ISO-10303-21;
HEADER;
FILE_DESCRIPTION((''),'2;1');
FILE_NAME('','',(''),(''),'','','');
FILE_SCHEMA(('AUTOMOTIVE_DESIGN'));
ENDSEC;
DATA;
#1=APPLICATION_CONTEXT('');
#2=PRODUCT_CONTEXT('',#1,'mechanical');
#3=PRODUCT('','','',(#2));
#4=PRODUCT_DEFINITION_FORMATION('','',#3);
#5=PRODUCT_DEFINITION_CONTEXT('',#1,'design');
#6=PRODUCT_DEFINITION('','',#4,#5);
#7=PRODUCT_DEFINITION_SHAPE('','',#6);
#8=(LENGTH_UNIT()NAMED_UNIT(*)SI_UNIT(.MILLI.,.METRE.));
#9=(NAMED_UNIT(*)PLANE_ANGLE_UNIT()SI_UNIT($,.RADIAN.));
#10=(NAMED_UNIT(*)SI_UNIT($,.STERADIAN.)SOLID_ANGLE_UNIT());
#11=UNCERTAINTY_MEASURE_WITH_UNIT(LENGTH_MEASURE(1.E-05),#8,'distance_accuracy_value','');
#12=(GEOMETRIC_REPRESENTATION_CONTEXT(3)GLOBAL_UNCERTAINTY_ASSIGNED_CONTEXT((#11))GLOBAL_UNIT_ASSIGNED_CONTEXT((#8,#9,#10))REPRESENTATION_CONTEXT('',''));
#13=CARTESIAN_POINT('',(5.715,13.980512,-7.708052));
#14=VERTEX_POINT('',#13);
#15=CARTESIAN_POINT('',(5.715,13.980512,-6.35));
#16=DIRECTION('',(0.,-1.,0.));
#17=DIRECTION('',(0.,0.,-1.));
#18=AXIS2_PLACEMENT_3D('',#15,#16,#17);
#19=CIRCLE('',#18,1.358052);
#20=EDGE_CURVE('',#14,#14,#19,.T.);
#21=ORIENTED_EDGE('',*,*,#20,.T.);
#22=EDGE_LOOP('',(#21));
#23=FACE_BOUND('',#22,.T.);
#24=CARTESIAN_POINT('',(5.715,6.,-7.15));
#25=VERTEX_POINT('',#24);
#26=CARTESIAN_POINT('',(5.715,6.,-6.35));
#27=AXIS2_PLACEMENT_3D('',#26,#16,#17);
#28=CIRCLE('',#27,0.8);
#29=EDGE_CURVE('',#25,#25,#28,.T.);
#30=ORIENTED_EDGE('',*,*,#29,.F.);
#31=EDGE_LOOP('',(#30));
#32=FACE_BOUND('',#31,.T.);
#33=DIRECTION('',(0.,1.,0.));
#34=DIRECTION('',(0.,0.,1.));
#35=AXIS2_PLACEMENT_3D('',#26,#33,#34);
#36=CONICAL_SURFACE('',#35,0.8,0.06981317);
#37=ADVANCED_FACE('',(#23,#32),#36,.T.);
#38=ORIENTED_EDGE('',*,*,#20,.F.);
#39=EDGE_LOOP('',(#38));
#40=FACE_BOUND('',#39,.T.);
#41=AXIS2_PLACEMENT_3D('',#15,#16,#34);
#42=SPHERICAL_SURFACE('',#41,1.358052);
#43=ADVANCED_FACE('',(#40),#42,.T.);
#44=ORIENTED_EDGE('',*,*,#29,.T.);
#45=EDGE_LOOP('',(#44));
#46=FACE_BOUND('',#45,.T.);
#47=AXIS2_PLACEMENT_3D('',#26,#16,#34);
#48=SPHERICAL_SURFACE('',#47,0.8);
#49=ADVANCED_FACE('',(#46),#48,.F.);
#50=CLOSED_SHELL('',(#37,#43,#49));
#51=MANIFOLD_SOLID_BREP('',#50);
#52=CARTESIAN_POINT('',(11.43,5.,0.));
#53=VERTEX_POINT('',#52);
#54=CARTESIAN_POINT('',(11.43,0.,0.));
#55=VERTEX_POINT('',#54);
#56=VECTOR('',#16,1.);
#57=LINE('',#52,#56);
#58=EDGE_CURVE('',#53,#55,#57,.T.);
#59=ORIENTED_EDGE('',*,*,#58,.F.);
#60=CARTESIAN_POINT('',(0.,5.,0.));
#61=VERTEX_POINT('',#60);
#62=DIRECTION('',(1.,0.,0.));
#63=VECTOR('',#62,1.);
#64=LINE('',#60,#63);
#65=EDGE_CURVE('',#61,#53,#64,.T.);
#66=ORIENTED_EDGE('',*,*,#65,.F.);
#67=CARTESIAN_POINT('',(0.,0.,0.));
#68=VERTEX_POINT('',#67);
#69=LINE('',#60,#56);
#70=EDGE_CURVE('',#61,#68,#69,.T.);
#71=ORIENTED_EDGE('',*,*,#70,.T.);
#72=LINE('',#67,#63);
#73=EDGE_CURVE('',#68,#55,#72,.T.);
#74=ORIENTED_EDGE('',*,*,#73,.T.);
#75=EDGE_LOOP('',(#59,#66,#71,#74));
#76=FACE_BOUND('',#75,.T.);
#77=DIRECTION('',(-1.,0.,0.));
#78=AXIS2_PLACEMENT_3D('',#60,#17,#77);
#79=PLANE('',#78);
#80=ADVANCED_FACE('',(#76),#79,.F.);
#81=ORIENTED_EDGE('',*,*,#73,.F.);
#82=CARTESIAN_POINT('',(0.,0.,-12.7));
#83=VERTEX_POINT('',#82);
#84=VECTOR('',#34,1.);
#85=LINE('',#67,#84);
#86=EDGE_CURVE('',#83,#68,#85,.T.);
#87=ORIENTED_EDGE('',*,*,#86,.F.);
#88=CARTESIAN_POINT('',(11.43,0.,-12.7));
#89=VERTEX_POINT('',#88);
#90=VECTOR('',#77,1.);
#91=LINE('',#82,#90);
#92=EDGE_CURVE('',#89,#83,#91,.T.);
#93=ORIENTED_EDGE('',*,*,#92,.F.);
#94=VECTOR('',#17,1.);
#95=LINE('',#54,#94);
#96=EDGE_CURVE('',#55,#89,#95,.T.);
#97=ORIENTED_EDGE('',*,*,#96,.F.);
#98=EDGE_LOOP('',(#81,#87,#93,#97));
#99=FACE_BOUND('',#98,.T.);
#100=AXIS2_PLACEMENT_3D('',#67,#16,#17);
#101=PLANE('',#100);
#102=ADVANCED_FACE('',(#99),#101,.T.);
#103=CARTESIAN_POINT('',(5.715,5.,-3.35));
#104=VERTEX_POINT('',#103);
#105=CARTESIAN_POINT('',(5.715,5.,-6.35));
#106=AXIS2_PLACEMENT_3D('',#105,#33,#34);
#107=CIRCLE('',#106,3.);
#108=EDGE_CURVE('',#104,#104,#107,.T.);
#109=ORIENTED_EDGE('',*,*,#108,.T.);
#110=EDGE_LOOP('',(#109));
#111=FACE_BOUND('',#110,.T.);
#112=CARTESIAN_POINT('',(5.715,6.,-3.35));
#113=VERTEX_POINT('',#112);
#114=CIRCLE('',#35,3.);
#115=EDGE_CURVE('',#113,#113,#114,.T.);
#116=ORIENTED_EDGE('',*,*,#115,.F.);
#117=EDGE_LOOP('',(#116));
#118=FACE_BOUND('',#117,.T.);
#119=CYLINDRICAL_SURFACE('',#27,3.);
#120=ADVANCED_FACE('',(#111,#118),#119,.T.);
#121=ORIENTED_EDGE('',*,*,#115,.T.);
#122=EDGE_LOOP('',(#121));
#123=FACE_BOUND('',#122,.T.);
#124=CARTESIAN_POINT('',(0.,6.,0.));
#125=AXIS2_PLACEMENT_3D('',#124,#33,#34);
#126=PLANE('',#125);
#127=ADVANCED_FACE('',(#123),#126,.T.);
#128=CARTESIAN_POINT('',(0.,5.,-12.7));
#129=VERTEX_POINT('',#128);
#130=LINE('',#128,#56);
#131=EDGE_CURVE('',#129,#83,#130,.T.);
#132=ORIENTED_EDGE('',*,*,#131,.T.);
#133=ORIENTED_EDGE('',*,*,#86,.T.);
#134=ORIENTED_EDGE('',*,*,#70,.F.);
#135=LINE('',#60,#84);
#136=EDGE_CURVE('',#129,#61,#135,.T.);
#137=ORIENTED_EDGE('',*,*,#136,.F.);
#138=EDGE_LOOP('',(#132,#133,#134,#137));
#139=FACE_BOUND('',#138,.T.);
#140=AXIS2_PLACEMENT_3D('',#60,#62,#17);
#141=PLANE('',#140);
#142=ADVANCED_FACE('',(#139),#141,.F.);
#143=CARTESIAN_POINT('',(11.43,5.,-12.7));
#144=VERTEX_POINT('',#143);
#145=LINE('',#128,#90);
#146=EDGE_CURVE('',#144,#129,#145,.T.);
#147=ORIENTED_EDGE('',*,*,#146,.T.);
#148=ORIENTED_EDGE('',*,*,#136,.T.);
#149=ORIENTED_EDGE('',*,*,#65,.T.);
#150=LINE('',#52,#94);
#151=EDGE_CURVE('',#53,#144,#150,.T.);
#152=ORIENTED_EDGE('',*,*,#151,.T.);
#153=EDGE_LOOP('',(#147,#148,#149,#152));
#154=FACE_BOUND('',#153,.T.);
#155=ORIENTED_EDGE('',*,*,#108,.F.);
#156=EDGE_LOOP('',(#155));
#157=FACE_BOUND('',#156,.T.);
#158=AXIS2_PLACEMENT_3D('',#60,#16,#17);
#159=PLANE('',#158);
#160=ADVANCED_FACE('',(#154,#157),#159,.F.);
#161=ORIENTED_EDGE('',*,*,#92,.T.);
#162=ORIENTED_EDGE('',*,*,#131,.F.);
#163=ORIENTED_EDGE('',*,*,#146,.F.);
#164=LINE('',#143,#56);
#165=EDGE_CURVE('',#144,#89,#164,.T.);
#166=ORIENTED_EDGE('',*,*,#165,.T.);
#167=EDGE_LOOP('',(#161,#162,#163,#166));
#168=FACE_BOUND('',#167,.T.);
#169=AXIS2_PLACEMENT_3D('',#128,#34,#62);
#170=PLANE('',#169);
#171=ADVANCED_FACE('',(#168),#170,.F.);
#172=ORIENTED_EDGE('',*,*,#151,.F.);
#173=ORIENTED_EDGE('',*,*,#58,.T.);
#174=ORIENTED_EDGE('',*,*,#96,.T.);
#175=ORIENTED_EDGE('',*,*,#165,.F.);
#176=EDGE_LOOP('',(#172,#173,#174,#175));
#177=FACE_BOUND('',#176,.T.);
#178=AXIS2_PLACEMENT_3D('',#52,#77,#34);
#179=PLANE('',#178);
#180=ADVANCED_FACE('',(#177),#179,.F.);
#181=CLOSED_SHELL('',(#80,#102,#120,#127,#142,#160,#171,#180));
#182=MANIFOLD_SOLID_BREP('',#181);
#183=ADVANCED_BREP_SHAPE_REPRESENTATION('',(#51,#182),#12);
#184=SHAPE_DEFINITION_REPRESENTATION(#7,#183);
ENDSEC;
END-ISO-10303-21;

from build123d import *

# Parameters (mm, degrees)
SKETCH1_W           = 11.43
SKETCH1_H           = 12.7
BOSS_EXTRUDE1_DEPTH = 5
SKETCH2_R           = 3
BOSS_EXTRUDE4_DEPTH = 1


with BuildPart() as part:
    # Sketch1 → Boss-Extrude1 (new body)
    with BuildSketch(Plane(origin=(0, 0, 0), x_dir=(1, 0, 0), z_dir=(0, 1, 0))):
        with Locations((5.715, 6.35)):
            Rectangle(SKETCH1_W, SKETCH1_H)
    extrude(amount=BOSS_EXTRUDE1_DEPTH)

    # Sketch2 → Boss-Extrude4 (add)
    with BuildSketch(Plane(origin=(0, 5, 0), x_dir=(1, 0, 0), z_dir=(0, 1, 0))):
        with Locations((5.715, 6.35)):
            Circle(SKETCH2_R)
    extrude(amount=BOSS_EXTRUDE4_DEPTH)


with BuildPart() as body_2:
    # Sketch3 → Revolve3 (revolve)
    with BuildSketch(Plane.ZY.offset(-5.715)):
        with BuildLine():
            ThreePointArc((-7.15, 6), (-6.915685425, 6.565685425), (-6.35, 6.8))
            Line((-6.35, 6.8), (-6.35, 15.338564192))
            ThreePointArc((-6.35, 15.338564192), (-7.31028763, 14.940800032), (-7.70805179, 13.980512402))
            Line((-7.70805179, 13.980512402), (-7.15, 6))
        make_face()
    revolve(axis=Axis((5.715, 6, -6.35), (0, 1, 0)))


solid = Compound([part.part, body_2.part])
